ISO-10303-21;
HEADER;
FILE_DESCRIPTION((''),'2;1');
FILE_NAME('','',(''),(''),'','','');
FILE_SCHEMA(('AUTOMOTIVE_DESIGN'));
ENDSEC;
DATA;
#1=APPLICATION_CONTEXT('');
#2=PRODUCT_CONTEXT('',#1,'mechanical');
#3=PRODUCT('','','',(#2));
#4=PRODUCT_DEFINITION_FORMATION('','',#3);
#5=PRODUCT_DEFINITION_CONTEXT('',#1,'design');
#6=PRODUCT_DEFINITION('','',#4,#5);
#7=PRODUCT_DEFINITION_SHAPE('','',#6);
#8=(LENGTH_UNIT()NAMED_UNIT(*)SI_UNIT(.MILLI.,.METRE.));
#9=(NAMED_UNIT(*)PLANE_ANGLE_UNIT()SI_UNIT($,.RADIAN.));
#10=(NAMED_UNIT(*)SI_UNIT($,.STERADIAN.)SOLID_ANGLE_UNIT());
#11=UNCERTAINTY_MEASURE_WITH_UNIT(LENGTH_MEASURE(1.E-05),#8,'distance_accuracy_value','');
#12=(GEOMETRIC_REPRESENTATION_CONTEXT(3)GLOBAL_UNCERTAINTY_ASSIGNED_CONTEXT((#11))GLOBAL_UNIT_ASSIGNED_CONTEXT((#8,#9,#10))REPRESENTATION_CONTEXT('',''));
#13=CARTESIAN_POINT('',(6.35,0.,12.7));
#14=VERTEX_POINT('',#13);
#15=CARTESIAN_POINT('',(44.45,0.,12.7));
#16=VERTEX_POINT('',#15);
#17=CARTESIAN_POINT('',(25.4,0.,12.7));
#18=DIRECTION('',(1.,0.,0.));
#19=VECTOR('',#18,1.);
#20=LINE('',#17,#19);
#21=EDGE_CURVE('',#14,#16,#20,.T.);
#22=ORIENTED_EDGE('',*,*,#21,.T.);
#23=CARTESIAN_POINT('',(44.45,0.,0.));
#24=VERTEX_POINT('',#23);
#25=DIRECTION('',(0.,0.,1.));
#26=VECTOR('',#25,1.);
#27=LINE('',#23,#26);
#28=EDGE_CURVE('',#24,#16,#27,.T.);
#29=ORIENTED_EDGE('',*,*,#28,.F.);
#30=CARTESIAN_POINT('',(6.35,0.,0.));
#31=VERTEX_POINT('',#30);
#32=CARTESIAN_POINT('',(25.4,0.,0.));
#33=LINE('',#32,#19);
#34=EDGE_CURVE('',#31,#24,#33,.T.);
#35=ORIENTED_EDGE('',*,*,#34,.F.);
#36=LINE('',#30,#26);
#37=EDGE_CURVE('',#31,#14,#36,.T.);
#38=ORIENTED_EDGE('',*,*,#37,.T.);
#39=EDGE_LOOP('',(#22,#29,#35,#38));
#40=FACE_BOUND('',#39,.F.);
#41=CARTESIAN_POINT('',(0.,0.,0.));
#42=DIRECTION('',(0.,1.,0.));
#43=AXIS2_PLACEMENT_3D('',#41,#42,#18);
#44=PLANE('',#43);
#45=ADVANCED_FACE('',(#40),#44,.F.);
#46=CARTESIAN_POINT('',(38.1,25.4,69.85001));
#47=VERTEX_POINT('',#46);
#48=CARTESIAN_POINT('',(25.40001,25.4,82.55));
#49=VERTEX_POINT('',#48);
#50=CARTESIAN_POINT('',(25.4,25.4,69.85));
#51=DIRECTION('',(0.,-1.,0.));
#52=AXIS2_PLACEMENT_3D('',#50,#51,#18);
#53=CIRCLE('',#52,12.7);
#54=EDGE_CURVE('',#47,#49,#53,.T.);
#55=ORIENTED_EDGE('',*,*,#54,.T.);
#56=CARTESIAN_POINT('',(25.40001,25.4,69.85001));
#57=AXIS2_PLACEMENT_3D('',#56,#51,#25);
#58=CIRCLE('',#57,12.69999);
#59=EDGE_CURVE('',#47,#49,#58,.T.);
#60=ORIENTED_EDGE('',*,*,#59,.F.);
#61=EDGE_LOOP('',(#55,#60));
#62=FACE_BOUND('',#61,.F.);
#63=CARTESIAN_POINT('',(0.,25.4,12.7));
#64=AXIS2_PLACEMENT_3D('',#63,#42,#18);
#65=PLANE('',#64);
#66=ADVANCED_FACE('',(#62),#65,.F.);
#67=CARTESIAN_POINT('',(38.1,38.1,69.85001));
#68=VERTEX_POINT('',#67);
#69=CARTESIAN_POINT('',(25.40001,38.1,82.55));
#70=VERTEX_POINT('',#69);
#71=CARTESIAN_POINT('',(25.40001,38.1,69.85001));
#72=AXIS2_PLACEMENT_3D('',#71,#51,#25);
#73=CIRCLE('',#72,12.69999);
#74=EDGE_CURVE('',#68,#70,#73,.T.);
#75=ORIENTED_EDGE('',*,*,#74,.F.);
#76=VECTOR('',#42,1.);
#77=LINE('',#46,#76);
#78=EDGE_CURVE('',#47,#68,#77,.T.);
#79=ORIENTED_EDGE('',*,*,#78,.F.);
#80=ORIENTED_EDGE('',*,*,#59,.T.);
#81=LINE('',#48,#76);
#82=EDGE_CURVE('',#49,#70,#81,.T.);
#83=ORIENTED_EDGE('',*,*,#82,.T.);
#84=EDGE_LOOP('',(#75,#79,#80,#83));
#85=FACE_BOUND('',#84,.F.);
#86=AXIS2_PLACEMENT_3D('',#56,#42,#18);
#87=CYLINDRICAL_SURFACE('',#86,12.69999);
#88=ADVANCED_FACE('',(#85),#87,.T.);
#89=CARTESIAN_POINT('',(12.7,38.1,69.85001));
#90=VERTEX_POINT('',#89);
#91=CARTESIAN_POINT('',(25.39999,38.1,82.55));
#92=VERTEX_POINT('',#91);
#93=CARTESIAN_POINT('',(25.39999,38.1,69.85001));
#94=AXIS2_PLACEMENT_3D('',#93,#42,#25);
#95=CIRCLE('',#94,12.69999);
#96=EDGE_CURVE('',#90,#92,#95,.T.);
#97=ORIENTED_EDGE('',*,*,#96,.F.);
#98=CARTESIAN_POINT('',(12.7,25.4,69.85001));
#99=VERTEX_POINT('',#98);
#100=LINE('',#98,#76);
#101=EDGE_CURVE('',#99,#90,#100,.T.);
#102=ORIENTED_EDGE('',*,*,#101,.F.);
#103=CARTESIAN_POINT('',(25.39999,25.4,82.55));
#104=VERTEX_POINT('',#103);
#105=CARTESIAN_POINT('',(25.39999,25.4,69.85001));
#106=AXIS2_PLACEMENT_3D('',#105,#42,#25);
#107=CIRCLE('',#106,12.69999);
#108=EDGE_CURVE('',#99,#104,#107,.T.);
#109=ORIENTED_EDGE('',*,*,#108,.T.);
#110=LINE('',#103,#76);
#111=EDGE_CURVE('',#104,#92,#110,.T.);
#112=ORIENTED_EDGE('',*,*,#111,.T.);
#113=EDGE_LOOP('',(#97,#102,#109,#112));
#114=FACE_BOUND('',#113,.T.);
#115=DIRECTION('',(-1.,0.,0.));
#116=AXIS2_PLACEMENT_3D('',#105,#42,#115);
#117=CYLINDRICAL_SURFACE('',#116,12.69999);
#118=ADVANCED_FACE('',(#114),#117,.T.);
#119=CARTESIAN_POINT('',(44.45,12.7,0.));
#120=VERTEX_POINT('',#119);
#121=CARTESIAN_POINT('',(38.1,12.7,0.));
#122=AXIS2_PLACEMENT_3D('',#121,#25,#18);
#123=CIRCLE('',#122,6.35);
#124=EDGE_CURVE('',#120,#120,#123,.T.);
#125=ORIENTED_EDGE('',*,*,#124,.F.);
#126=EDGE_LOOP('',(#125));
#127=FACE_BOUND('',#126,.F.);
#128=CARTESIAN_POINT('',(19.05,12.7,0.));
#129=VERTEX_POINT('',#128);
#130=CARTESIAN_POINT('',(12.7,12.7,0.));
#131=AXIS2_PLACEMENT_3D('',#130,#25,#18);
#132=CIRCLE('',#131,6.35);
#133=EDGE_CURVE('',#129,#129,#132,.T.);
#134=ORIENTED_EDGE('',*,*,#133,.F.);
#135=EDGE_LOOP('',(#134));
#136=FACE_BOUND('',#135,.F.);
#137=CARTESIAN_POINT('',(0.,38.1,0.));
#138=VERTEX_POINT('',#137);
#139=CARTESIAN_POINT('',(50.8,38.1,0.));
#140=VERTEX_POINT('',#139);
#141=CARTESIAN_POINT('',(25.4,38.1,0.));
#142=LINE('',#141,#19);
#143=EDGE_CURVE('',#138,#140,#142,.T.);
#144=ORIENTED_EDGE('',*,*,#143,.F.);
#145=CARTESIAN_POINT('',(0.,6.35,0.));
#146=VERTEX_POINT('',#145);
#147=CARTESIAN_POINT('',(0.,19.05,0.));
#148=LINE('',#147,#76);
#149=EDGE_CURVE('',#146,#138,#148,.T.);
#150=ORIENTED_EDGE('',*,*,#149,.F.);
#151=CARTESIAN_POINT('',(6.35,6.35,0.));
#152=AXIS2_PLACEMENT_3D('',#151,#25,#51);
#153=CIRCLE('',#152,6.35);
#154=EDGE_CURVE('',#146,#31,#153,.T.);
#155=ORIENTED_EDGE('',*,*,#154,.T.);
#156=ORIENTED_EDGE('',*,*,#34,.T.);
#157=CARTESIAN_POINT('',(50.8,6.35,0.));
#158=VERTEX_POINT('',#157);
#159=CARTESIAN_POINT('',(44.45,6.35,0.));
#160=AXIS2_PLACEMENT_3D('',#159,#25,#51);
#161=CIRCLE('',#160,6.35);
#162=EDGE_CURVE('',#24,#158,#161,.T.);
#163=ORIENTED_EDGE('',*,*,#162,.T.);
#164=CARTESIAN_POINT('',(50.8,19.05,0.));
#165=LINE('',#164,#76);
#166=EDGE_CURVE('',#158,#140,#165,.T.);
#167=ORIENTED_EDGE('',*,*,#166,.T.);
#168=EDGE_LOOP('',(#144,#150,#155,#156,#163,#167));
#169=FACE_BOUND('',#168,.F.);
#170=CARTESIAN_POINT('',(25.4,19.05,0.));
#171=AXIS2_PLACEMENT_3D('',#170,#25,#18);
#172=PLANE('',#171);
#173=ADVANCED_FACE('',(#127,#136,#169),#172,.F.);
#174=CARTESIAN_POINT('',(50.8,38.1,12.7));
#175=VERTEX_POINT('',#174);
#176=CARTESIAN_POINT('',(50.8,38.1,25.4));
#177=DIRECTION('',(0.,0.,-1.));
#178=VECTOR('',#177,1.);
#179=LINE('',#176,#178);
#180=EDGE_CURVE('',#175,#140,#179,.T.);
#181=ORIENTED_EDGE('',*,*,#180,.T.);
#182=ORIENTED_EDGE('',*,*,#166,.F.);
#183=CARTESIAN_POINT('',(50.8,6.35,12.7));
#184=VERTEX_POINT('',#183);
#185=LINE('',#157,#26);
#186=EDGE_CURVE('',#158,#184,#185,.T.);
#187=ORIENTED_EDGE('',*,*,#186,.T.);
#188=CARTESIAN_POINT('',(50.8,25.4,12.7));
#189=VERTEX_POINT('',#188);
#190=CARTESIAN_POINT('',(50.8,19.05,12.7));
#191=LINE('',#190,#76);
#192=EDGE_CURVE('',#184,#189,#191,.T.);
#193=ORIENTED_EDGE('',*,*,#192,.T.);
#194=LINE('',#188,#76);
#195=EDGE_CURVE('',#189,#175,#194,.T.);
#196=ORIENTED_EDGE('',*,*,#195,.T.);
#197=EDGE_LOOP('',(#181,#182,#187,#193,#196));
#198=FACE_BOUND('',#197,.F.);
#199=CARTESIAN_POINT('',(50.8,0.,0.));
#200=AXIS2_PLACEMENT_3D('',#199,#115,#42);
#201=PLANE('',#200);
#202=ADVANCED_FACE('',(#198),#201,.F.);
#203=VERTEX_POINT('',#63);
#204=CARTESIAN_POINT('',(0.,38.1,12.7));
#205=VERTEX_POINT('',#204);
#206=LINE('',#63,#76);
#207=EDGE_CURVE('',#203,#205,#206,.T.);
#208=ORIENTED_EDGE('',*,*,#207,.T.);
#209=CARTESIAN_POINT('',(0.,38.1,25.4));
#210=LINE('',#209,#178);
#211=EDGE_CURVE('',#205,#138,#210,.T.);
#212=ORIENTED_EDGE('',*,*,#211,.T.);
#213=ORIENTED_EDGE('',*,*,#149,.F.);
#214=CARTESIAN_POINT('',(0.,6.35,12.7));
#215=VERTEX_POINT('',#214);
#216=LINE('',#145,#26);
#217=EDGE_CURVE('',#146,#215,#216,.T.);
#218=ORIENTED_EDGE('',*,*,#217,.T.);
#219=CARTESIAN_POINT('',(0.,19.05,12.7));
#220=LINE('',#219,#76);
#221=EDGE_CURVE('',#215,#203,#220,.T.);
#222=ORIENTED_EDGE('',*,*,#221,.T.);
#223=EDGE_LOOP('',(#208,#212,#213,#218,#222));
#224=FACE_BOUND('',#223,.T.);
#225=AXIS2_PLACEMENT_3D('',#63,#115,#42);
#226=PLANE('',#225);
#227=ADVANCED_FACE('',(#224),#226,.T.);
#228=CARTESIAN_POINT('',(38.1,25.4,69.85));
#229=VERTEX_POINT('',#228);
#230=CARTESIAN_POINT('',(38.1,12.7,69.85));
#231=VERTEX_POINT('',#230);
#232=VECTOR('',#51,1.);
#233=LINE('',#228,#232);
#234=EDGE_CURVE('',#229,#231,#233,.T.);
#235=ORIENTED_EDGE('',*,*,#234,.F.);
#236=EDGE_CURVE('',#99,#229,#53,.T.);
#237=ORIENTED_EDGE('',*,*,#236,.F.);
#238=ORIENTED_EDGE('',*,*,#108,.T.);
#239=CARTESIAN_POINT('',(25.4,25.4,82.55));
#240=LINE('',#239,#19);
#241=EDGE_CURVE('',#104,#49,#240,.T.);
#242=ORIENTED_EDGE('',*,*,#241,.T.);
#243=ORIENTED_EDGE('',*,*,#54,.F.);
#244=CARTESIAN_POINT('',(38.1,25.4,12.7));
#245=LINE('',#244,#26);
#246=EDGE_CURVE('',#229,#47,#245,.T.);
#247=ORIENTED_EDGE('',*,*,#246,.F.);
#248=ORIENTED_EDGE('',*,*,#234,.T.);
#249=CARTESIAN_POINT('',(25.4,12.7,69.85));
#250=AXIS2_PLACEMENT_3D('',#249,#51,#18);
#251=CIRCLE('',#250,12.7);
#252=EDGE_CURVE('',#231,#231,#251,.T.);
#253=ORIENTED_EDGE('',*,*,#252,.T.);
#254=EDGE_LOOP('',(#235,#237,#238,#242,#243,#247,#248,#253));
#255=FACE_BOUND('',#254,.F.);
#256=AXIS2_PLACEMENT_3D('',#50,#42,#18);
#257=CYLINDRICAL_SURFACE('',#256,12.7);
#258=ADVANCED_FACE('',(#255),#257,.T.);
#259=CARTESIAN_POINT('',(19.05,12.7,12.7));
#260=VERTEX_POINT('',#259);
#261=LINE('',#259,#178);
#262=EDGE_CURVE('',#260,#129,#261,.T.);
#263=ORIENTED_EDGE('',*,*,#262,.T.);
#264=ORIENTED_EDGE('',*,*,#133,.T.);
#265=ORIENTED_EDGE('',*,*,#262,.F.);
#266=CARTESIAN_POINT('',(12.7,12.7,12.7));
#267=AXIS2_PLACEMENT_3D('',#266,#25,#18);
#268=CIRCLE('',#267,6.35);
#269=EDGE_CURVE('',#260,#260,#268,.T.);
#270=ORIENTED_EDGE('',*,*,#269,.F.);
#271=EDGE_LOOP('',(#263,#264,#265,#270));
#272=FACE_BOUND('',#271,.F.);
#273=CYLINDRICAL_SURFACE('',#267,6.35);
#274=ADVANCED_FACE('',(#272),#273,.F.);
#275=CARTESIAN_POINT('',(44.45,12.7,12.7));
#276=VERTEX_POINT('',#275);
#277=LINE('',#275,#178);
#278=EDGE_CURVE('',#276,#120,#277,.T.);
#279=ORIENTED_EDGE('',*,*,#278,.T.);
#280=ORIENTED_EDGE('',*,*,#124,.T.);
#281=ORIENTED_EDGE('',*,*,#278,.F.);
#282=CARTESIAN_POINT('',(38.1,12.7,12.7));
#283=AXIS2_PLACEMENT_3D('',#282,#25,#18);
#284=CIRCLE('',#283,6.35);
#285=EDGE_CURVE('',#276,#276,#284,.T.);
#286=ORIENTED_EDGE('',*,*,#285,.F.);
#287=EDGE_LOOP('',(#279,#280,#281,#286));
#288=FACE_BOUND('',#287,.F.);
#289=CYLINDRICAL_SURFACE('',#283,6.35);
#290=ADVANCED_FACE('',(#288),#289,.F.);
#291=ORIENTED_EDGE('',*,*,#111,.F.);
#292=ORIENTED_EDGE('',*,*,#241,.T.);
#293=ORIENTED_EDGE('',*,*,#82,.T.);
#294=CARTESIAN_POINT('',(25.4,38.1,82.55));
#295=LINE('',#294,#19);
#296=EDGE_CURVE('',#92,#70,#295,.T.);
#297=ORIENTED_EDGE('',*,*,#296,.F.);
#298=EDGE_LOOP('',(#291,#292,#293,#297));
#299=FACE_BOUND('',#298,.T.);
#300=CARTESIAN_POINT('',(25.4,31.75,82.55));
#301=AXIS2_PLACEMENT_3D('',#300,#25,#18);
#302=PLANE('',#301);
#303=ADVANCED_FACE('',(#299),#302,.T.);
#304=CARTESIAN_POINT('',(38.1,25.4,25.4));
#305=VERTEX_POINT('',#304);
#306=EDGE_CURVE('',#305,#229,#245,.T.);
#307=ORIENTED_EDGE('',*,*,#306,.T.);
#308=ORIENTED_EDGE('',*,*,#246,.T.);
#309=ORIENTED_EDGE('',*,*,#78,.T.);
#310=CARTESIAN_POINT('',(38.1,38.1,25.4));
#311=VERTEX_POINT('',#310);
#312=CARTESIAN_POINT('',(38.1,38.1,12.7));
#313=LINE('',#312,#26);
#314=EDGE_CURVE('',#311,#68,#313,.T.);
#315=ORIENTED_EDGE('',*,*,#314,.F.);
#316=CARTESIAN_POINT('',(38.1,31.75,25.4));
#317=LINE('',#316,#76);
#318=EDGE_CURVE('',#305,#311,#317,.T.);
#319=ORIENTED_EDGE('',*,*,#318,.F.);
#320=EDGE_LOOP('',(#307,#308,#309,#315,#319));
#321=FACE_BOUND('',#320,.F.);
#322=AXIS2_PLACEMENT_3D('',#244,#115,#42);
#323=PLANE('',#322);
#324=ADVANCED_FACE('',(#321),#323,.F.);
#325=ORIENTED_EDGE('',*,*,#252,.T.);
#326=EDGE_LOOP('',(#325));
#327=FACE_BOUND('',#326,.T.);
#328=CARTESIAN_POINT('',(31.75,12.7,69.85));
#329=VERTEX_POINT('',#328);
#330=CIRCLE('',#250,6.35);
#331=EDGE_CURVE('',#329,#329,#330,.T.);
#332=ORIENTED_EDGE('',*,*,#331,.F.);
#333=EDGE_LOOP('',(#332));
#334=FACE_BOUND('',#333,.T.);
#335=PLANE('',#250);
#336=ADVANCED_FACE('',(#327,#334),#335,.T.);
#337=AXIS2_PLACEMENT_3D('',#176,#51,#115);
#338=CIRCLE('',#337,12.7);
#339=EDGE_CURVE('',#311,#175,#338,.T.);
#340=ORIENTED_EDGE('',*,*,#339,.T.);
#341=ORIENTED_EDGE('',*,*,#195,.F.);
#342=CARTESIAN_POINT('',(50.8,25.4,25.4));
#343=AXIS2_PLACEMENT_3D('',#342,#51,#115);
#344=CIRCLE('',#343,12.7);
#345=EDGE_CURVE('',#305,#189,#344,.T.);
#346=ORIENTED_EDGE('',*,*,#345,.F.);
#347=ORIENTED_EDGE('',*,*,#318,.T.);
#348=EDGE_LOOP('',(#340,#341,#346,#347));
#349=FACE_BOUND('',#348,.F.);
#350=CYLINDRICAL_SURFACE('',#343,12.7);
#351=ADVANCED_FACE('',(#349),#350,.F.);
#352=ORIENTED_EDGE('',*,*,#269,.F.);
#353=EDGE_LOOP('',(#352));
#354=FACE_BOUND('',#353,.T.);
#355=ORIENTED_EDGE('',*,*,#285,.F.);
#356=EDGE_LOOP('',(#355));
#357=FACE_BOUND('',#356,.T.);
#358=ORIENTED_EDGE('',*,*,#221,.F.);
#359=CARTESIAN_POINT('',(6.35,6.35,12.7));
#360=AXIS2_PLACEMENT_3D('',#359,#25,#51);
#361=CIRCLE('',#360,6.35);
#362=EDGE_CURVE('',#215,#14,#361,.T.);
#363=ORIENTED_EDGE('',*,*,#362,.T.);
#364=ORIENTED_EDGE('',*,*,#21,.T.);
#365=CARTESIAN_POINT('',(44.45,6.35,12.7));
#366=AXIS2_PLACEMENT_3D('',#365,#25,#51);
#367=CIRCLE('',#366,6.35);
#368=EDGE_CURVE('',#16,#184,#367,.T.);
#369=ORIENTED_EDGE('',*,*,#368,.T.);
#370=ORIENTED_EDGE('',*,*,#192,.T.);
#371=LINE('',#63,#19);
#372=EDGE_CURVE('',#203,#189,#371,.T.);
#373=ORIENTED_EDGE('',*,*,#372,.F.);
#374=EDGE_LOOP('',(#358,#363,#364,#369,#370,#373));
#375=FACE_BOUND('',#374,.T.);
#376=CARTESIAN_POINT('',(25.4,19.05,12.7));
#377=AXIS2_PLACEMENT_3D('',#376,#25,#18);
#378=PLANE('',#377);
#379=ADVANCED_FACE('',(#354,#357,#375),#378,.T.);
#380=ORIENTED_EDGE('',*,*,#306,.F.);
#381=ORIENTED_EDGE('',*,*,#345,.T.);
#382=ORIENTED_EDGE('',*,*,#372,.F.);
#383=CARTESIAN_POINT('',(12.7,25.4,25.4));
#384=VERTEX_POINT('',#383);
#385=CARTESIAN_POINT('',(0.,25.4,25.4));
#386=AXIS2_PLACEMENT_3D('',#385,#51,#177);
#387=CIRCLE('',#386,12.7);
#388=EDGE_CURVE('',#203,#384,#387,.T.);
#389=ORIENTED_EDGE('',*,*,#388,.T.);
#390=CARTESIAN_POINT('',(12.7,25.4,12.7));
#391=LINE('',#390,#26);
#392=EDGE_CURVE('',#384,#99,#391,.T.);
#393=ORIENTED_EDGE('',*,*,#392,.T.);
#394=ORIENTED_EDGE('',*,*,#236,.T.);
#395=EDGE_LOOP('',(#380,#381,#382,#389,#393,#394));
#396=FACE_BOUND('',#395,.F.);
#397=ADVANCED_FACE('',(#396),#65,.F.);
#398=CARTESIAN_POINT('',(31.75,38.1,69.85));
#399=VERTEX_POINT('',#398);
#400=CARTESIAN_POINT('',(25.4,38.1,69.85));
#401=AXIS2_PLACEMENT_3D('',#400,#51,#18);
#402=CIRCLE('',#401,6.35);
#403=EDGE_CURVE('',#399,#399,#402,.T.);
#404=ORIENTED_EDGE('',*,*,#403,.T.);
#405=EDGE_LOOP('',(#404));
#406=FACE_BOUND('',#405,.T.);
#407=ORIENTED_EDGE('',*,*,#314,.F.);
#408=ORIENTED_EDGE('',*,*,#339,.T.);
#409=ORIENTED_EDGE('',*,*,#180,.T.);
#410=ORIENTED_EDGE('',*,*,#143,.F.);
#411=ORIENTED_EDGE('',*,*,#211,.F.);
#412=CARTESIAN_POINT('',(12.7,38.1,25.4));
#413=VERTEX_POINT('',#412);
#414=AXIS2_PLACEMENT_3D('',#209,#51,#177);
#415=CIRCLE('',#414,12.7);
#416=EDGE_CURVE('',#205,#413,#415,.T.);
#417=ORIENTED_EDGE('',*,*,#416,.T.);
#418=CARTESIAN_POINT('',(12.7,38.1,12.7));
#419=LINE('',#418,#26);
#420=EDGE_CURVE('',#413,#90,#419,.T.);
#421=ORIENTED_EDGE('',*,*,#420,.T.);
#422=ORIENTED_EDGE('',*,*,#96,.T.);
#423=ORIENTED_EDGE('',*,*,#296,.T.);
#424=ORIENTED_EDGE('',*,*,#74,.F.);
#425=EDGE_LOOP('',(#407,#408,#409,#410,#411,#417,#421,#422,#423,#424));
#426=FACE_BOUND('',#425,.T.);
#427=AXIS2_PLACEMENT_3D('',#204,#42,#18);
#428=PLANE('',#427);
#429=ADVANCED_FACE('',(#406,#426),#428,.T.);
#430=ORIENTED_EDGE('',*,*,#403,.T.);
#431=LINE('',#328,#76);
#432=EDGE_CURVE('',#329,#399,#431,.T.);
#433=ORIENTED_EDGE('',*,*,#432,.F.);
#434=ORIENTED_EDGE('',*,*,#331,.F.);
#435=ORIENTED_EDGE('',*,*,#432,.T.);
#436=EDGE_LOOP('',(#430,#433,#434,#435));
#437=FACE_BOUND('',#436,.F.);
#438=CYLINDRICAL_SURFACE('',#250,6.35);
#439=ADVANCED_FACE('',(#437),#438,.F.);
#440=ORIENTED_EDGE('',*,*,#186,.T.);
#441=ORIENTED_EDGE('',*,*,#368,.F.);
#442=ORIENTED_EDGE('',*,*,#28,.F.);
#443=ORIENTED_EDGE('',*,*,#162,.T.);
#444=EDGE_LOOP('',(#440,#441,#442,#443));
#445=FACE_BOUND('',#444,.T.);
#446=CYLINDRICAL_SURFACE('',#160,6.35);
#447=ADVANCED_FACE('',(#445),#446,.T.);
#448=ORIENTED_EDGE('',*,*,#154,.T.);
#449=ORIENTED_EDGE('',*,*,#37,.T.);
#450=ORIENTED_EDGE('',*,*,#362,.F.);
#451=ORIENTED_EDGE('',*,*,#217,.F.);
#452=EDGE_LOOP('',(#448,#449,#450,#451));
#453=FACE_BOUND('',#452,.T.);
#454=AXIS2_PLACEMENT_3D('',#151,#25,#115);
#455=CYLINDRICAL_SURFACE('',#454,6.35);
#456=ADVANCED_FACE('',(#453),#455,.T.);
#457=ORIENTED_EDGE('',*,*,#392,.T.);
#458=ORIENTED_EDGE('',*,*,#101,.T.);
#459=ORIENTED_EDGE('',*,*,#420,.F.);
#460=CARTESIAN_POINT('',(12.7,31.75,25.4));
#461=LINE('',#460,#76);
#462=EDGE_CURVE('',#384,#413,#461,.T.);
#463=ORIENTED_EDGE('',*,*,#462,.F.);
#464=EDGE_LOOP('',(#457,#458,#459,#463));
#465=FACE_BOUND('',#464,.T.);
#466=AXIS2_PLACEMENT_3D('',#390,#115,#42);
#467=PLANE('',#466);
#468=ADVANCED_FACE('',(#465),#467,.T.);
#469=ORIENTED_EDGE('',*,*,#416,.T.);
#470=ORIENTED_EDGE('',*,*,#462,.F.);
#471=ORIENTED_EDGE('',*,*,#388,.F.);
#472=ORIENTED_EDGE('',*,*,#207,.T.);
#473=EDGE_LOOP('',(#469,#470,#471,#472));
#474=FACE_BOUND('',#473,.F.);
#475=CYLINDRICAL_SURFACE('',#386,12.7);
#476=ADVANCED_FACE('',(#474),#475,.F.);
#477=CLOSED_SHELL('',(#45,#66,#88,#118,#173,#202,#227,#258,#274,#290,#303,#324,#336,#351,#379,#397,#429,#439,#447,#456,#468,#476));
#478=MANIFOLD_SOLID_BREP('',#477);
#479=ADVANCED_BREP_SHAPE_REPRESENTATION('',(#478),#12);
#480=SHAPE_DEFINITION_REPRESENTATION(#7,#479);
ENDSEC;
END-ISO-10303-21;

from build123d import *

# Parameters (mm, degrees)
F0_W      = 50.8
F0_H      = 38.1
F1_DEPTH  = 12.7
F2_R      = 6.35
F3_R      = 6.35
F4_DEPTH  = 25.4
F5_W      = 25.4
F5_H      = 12.7
F6_DEPTH  = 69.85
F7_R      = 12.69999
F8_W      = 12.7
F8_H      = 12.7
F9_DEPTH  = 12.7
F11_DEPTH = 25.4
F12_R     = 12.7
F13_DEPTH = 12.7
F14_R     = 6.35
F15_DEPTH = 25.4


# Not quite as in the source:
# - a fillet or chamfer is up to 0.001 mm smaller than in the source, because OpenCascade refuses the exact size


with BuildPart() as f1:
    # F0 (on Top) → F1 (new body)
    with BuildSketch(Plane.XY):
        with Locations((25.4, 19.05)):
            Rectangle(F0_W, F0_H)
    extrude(amount=F1_DEPTH)

    # F2
    f2_edges = [f1.edges().sort_by_distance(p)[0] for p in [
        (0, 0, 6.35),
        (50.8, 0, 6.35),
    ]]
    fillet(f2_edges, radius=F2_R)

    # F3 (on face) → F4 (cut)
    with BuildSketch(Plane.XY.offset(12.7)):
        with Locations((12.7, 12.7)):
            Circle(F3_R)
        with Locations((38.1, 12.7)):
            Circle(F3_R)
    extrude(amount=-F4_DEPTH, mode=Mode.SUBTRACT)

    # F5 (on face) → F6 (join)
    with BuildSketch(Plane.XY.offset(12.7)):
        with Locations((25.4, 31.75)):
            Rectangle(F5_W, F5_H)
    extrude(amount=F6_DEPTH)

    # F7 (radius 12.7 in the source; OpenCascade refuses exactly that, so slightly less here)
    f7_edges = [f1.edges().sort_by_distance(p)[0] for p in [
        (38.1, 31.75, 82.55),
        (12.7, 31.75, 82.55),
    ]]
    fillet(f7_edges, radius=F7_R)

    # F8 (on face) → F9 (join)
    with BuildSketch(Plane.XY.offset(12.7)):
        with Locations((6.35, 31.75)):
            Rectangle(F8_W, F8_H)
        with Locations((44.45, 31.75)):
            Rectangle(F8_W, F8_H)
    extrude(amount=F9_DEPTH)

    # F10 (on face) → F11 (cut)
    with BuildSketch(Plane.XZ.offset(-25.4)):
        with BuildLine():
            Line((0, 25.4), (0, 12.7))
            ThreePointArc((0, 12.7), (8.9802561211, 16.4197438789), (12.7, 25.4))
            Line((12.7, 25.4), (0, 25.4))
        make_face()
        with BuildLine():
            ThreePointArc((38.1, 25.4), (41.8197438789, 16.4197438789), (50.8, 12.7))
            Line((50.8, 12.7), (50.8, 25.4))
            Line((50.8, 25.4), (38.1, 25.4))
        make_face()
    extrude(amount=-F11_DEPTH, mode=Mode.SUBTRACT)

    # F12 (on face) → F13 (join)
    with BuildSketch(Plane.XZ.offset(-25.4)):
        with Locations((25.4, 69.85)):
            Circle(F12_R)
    extrude(amount=F13_DEPTH)

    # F14 (on face) → F15 (cut)
    with BuildSketch(Plane.XZ.offset(-12.7)):
        with Locations((25.4, 69.85)):
            Circle(F14_R)
    extrude(amount=-F15_DEPTH, mode=Mode.SUBTRACT)


solid = f1.part
